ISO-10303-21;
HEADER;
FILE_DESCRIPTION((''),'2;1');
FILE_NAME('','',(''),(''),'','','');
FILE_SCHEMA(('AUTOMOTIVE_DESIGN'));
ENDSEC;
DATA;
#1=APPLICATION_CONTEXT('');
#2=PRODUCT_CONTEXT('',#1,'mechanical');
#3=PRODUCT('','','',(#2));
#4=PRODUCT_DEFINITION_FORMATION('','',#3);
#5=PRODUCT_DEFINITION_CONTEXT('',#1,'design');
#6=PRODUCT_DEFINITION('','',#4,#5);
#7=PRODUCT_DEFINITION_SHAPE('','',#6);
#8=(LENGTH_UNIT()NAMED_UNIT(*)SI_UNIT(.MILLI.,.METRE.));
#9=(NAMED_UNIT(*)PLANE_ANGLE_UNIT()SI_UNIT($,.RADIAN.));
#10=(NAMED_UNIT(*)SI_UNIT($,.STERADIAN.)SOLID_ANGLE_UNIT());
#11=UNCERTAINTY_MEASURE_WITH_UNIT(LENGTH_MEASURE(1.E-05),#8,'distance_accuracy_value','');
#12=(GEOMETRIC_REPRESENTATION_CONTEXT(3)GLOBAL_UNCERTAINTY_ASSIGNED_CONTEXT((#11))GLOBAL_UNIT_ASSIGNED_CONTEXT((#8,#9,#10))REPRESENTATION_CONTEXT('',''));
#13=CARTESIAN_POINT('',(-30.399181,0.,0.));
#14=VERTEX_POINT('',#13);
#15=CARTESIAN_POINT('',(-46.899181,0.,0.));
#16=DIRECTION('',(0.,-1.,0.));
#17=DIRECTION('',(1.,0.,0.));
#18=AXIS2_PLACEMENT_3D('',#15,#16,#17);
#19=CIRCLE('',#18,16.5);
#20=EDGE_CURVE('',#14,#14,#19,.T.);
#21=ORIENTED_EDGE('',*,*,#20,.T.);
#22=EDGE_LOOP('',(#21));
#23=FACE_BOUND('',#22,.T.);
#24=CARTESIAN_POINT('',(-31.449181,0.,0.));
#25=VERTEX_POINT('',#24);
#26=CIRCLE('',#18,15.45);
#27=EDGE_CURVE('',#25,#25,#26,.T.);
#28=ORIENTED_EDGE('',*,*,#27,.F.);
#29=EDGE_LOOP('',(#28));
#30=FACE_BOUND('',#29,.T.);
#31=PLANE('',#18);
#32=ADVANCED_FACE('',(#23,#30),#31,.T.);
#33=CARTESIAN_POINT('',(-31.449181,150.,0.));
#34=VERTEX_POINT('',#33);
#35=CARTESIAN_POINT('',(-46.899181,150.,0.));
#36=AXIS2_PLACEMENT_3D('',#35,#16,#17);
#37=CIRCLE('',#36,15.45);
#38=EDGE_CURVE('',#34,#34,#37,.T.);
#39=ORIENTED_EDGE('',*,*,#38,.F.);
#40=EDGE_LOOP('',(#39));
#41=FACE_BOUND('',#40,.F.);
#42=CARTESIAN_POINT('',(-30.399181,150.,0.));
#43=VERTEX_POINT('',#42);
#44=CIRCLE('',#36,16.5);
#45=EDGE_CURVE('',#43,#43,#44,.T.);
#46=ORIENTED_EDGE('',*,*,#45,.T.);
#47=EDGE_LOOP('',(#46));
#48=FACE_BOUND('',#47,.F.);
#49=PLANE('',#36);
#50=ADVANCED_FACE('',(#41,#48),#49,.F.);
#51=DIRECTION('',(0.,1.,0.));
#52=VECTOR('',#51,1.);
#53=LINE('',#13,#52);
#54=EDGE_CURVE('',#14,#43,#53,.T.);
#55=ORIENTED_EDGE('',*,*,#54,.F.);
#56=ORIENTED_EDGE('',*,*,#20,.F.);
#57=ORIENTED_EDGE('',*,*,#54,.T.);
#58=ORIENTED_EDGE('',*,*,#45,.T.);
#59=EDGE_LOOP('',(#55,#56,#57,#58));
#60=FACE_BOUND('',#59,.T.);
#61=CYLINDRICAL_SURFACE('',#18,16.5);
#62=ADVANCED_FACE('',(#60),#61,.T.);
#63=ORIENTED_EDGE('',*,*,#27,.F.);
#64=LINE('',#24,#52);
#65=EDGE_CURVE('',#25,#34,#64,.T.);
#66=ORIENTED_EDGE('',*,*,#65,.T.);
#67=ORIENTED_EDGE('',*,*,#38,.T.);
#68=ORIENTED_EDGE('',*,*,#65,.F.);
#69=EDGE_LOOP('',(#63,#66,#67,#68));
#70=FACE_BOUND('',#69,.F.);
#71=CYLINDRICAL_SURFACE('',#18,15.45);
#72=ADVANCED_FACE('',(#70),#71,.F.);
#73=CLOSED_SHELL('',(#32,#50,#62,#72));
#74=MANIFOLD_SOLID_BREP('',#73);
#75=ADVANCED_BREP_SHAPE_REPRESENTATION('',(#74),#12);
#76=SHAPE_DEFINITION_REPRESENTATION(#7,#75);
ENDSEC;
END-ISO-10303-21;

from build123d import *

# Parameters (mm, degrees)
F2_R     = 16.5
F2_R_2   = 15.45
F3_DEPTH = 150


# Not quite as in the source:
# - the program builds the solid bodies; features that only make, move or delete a surface that nothing else refers to are left out


with BuildPart() as f3:
    # F2 (on Front) → F3 (new body)
    with BuildSketch(Plane.XZ):
        with Locations((-46.8991808593, 0)):
            Circle(F2_R)
        with Locations((-46.8991808593, 0)):
            Circle(F2_R_2, mode=Mode.SUBTRACT)
    extrude(amount=-F3_DEPTH)


solid = f3.part
